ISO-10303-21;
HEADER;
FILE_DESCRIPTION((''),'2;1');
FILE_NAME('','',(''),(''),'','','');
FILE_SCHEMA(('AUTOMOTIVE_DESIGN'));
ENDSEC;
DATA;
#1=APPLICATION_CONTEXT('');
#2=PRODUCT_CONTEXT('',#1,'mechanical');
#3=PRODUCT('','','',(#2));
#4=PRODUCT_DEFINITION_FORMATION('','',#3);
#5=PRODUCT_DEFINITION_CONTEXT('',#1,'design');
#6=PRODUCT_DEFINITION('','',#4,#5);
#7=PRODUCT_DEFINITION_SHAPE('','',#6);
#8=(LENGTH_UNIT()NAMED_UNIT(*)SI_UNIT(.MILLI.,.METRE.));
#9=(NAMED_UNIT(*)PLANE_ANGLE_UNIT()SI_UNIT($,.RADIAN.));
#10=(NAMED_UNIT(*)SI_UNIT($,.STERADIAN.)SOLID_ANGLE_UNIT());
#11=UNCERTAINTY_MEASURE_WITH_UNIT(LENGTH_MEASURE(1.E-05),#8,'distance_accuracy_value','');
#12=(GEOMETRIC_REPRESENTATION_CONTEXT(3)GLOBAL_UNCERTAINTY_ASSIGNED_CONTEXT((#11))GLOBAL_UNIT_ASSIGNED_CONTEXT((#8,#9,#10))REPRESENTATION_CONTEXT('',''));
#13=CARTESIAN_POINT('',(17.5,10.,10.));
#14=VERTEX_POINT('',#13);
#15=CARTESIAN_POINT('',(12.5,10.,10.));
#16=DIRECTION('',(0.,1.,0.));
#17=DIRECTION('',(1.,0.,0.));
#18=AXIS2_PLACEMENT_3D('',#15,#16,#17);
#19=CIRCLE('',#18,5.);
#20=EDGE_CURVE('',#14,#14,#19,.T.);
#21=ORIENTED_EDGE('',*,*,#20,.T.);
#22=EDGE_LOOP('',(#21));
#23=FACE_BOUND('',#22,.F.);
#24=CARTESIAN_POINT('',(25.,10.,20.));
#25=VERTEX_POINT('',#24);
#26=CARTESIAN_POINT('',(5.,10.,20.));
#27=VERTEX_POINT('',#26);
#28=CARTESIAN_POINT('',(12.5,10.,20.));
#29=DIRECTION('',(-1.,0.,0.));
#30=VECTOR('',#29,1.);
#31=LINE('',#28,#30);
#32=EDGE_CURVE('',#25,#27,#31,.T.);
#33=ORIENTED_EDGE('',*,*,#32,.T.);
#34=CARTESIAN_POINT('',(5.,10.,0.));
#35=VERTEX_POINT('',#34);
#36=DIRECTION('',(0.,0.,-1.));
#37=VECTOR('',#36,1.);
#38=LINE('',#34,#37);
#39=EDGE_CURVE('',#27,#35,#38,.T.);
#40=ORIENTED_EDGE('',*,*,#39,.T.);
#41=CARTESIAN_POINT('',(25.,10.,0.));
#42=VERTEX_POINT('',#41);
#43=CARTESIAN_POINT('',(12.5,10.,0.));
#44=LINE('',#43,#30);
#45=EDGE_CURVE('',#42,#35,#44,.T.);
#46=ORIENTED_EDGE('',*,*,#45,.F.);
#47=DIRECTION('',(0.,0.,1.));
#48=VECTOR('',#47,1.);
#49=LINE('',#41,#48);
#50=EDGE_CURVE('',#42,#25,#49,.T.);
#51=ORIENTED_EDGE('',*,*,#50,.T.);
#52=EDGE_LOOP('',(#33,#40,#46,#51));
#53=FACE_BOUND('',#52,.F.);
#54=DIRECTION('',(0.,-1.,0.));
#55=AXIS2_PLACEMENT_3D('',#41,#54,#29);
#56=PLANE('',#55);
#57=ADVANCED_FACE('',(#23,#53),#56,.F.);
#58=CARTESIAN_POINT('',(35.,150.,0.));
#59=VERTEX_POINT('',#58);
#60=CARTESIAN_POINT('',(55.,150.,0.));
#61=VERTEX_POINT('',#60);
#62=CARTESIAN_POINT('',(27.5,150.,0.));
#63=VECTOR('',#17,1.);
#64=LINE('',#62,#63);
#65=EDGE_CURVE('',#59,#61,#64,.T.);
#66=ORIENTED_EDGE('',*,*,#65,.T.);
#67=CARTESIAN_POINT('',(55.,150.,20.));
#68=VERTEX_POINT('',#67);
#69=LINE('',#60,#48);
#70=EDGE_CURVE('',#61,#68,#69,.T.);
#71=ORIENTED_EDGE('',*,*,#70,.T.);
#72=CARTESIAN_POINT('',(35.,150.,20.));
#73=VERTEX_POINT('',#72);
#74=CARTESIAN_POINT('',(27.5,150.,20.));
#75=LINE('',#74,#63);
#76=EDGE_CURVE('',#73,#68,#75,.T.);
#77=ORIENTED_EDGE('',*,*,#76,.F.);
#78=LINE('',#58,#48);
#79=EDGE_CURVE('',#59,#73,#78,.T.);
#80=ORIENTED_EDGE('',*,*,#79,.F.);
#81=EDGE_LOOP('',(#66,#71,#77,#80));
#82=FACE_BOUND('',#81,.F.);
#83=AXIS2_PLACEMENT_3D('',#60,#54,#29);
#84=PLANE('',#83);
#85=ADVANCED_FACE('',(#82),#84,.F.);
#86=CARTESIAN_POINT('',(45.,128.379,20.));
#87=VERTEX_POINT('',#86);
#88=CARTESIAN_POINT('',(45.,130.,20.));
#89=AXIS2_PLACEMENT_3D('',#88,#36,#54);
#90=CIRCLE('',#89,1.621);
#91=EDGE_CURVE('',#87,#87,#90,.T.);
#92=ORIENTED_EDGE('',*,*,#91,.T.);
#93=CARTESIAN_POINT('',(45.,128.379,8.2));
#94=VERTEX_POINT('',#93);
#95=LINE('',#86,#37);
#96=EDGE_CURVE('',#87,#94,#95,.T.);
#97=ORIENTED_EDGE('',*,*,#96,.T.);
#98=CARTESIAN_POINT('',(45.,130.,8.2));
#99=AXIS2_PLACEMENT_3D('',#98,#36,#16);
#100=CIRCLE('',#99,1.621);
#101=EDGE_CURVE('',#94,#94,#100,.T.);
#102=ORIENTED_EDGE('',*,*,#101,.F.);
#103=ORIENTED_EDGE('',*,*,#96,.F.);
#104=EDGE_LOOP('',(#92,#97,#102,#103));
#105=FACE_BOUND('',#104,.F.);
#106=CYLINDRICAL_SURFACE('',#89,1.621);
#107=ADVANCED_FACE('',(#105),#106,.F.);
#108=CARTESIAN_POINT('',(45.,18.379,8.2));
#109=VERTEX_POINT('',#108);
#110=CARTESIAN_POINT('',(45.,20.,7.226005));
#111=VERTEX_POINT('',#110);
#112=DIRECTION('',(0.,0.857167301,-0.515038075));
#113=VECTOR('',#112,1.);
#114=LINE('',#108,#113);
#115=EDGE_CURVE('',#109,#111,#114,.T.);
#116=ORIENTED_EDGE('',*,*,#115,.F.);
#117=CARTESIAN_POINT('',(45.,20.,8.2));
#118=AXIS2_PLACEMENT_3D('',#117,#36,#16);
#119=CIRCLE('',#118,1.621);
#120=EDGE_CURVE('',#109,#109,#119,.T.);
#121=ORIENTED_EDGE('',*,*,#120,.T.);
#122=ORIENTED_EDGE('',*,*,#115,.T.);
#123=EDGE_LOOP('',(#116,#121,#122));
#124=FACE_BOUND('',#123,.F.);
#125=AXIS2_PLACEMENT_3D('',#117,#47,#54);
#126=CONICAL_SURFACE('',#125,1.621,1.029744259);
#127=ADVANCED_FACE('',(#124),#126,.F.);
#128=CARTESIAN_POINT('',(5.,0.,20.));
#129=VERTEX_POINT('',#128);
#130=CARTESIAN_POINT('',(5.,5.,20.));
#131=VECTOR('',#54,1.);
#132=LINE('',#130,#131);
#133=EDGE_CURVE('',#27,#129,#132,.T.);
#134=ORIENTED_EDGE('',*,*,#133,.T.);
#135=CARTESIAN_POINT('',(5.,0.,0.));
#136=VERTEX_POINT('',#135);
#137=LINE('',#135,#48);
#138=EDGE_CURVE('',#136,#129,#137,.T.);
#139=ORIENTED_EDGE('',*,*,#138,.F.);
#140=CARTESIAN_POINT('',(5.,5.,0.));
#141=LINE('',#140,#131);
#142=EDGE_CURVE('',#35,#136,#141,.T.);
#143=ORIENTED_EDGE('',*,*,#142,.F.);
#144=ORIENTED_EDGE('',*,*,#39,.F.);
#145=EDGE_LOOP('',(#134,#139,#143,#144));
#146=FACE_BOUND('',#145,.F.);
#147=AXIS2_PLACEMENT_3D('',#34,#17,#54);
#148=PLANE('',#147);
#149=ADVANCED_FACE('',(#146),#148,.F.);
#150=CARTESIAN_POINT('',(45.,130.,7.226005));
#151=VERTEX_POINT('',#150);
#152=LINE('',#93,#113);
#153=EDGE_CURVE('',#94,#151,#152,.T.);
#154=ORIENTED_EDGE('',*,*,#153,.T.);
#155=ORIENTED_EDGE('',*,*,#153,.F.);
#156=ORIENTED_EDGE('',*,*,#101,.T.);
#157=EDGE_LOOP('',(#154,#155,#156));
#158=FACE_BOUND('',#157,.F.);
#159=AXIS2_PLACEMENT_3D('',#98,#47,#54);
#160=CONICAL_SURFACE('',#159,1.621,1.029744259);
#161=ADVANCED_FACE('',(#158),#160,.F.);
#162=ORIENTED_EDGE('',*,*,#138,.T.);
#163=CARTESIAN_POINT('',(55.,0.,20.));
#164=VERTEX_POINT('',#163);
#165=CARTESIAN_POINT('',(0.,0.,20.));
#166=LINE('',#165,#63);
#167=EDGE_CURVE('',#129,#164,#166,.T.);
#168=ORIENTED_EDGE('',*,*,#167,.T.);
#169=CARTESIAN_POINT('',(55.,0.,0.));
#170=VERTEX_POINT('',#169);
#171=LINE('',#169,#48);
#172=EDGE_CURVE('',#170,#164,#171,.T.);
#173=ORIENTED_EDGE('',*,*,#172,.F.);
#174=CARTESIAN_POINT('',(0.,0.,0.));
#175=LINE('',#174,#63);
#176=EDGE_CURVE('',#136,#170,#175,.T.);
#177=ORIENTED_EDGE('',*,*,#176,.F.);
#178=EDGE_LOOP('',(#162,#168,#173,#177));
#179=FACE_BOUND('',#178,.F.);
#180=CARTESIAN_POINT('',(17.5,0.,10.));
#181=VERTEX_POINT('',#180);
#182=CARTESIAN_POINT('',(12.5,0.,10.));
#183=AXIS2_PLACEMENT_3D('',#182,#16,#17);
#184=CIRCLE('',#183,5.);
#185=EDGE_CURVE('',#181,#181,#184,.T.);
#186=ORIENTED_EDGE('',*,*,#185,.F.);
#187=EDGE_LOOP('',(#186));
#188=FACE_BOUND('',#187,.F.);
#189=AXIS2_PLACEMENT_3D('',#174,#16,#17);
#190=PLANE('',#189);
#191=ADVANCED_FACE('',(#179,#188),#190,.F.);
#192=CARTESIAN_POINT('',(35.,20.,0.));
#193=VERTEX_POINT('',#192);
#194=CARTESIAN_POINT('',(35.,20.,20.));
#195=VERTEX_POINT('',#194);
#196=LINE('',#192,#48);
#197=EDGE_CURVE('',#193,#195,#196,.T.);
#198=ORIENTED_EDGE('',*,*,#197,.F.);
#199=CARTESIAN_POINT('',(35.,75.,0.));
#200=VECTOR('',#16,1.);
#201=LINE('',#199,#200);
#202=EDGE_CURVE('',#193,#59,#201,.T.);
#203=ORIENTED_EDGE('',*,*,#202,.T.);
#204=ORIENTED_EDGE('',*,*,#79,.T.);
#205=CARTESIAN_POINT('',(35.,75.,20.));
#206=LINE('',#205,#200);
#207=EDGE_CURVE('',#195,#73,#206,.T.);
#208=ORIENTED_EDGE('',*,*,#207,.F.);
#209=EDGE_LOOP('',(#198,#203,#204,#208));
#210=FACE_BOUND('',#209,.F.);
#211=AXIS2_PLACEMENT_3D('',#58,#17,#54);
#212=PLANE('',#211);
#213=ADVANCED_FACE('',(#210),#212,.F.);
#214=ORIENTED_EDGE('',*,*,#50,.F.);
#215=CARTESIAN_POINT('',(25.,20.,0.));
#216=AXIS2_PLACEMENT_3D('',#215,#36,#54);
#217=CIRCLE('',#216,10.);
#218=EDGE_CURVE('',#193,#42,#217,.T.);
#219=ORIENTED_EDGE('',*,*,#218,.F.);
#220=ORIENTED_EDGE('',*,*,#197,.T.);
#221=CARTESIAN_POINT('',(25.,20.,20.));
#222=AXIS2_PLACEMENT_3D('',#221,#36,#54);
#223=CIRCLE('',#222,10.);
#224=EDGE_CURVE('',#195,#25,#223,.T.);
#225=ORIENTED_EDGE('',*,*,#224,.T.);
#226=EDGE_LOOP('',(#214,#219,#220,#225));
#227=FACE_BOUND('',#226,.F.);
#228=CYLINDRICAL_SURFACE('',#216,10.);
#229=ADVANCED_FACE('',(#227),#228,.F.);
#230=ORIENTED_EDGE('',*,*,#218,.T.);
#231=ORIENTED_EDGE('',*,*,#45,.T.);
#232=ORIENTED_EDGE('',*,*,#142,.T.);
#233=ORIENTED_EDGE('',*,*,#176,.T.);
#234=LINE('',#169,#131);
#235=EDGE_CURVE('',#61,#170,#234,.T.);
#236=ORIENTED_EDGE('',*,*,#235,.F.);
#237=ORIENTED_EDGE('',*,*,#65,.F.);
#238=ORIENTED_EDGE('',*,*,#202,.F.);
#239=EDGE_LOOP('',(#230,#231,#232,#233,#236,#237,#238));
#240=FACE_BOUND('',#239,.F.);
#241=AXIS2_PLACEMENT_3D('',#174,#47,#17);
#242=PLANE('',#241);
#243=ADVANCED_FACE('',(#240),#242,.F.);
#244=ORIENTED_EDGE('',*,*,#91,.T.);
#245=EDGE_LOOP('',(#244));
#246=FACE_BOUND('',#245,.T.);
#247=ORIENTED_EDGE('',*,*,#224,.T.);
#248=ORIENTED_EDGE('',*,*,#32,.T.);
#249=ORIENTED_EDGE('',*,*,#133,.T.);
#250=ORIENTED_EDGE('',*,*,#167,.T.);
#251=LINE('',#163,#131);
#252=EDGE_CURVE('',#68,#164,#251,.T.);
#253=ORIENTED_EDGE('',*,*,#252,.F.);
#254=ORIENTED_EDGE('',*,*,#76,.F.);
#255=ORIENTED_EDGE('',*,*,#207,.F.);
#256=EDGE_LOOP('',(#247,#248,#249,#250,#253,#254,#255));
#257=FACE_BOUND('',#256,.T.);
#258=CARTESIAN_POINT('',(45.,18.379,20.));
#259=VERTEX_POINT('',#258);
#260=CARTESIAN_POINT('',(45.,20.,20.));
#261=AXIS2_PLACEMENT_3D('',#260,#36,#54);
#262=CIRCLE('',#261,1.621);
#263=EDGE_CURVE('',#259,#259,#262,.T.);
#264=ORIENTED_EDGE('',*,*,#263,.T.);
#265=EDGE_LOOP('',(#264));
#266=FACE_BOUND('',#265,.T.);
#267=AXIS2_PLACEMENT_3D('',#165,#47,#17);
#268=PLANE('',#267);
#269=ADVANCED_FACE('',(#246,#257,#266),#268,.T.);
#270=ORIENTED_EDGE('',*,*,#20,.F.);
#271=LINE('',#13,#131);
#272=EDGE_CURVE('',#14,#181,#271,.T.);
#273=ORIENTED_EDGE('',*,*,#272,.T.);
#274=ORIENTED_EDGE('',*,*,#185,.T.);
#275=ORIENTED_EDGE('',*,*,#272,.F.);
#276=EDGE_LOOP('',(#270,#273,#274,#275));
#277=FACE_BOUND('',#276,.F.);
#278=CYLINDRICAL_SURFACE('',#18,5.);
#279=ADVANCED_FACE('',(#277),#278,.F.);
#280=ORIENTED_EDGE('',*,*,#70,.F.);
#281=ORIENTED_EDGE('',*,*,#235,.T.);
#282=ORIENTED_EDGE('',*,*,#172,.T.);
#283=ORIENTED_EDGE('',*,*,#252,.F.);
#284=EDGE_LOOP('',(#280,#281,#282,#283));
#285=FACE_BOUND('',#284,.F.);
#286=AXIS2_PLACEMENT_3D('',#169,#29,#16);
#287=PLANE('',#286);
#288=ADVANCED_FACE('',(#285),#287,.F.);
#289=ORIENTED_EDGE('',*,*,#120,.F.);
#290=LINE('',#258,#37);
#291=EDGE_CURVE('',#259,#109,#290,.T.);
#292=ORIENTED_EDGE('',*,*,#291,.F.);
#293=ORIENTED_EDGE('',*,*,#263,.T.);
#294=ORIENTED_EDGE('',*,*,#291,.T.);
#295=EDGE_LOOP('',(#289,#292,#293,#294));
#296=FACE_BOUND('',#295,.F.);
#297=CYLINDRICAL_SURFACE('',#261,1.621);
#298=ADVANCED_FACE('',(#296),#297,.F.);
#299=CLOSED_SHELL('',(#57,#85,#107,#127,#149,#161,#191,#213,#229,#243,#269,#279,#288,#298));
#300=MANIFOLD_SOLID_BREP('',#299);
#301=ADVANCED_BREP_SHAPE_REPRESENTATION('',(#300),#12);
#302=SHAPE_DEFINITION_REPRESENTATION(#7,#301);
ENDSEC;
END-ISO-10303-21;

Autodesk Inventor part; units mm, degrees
ref_plane "YZ Plane" through (0, 0, 0) normal (1, 0, 0) x (0, 1, 0)
ref_plane "XZ Plane" through (0, 0, 0) normal (0, 1, 0) x (-1, 0, 0)
ref_plane "XY Plane" through (0, 0, 0) normal (0, 0, 1) x (1, 0, 0)
sketch "Bracket Tall" plane through (0, 0, 0) normal (0, 0, 1) x (1, 0, 0)
  line L0 (0, 0) -> (30, 0)
  line L1 (25, 10) -> (0, 10)
  line L2 (0, 10) -> (0, 0)
  line L3 (30, 0) -> (55, 0)
  line L4 (55, 0) -> (55, 150)
  line L5 (55, 150) -> (35, 150)
  line L6 (35, 150) -> (35, 20)
  arc A0 (25, 10) -> (35, 20) centre (25, 20) ccw
  point P0 (35, 10)
  dimension "d0" = 35
  dimension "d2" = 20
  dimension "d3" = 150
  dimension "d4" = 10
  dimension "d10" = 10
extrude "Extrusion1" add sketch "Bracket Tall" along normal blind 20
sketch "Clearance Hole (M6-8)" plane through (0, 10, 0) normal (0, 1, 0) x (1, 0, 0)
  circle A0 centre (12.5, -10) radius 5
  line L0 (0, 0) -> (0, -20) projected
  line L1 (25, 0) -> (25, -20) projected
  dimension "d7" = 10
extrude "Extrusion2" cut sketch "Clearance Hole (M6-8)" against normal through all
sketch "Sketch4" plane through (0, 0, 20) normal (0, 0, 1) x (1, 0, 0)
  circle A0 centre (45, 20) radius 1.621 projected
  circle A1 centre (45, 20) radius 1.621
  line L0 (45, 20) -> (45, 130)
  point P0 (0, 0)
  dimension "d34" = 110
hole "Hole2" at (45, 20, 20) at (45, 130, 20) direction (0, 0, -1) diameter 3.242 depth 11.8 tip angle 118 thread size "M4x0.7" class "6H" standard "ANSI Metric M Profile"
move faces "Move1" translate (5, 0, 0) faces at (0, 6.6667, 6.6667)
properties part number "Bracket_Tall2" material "Aluminum, Anodized Silver"
